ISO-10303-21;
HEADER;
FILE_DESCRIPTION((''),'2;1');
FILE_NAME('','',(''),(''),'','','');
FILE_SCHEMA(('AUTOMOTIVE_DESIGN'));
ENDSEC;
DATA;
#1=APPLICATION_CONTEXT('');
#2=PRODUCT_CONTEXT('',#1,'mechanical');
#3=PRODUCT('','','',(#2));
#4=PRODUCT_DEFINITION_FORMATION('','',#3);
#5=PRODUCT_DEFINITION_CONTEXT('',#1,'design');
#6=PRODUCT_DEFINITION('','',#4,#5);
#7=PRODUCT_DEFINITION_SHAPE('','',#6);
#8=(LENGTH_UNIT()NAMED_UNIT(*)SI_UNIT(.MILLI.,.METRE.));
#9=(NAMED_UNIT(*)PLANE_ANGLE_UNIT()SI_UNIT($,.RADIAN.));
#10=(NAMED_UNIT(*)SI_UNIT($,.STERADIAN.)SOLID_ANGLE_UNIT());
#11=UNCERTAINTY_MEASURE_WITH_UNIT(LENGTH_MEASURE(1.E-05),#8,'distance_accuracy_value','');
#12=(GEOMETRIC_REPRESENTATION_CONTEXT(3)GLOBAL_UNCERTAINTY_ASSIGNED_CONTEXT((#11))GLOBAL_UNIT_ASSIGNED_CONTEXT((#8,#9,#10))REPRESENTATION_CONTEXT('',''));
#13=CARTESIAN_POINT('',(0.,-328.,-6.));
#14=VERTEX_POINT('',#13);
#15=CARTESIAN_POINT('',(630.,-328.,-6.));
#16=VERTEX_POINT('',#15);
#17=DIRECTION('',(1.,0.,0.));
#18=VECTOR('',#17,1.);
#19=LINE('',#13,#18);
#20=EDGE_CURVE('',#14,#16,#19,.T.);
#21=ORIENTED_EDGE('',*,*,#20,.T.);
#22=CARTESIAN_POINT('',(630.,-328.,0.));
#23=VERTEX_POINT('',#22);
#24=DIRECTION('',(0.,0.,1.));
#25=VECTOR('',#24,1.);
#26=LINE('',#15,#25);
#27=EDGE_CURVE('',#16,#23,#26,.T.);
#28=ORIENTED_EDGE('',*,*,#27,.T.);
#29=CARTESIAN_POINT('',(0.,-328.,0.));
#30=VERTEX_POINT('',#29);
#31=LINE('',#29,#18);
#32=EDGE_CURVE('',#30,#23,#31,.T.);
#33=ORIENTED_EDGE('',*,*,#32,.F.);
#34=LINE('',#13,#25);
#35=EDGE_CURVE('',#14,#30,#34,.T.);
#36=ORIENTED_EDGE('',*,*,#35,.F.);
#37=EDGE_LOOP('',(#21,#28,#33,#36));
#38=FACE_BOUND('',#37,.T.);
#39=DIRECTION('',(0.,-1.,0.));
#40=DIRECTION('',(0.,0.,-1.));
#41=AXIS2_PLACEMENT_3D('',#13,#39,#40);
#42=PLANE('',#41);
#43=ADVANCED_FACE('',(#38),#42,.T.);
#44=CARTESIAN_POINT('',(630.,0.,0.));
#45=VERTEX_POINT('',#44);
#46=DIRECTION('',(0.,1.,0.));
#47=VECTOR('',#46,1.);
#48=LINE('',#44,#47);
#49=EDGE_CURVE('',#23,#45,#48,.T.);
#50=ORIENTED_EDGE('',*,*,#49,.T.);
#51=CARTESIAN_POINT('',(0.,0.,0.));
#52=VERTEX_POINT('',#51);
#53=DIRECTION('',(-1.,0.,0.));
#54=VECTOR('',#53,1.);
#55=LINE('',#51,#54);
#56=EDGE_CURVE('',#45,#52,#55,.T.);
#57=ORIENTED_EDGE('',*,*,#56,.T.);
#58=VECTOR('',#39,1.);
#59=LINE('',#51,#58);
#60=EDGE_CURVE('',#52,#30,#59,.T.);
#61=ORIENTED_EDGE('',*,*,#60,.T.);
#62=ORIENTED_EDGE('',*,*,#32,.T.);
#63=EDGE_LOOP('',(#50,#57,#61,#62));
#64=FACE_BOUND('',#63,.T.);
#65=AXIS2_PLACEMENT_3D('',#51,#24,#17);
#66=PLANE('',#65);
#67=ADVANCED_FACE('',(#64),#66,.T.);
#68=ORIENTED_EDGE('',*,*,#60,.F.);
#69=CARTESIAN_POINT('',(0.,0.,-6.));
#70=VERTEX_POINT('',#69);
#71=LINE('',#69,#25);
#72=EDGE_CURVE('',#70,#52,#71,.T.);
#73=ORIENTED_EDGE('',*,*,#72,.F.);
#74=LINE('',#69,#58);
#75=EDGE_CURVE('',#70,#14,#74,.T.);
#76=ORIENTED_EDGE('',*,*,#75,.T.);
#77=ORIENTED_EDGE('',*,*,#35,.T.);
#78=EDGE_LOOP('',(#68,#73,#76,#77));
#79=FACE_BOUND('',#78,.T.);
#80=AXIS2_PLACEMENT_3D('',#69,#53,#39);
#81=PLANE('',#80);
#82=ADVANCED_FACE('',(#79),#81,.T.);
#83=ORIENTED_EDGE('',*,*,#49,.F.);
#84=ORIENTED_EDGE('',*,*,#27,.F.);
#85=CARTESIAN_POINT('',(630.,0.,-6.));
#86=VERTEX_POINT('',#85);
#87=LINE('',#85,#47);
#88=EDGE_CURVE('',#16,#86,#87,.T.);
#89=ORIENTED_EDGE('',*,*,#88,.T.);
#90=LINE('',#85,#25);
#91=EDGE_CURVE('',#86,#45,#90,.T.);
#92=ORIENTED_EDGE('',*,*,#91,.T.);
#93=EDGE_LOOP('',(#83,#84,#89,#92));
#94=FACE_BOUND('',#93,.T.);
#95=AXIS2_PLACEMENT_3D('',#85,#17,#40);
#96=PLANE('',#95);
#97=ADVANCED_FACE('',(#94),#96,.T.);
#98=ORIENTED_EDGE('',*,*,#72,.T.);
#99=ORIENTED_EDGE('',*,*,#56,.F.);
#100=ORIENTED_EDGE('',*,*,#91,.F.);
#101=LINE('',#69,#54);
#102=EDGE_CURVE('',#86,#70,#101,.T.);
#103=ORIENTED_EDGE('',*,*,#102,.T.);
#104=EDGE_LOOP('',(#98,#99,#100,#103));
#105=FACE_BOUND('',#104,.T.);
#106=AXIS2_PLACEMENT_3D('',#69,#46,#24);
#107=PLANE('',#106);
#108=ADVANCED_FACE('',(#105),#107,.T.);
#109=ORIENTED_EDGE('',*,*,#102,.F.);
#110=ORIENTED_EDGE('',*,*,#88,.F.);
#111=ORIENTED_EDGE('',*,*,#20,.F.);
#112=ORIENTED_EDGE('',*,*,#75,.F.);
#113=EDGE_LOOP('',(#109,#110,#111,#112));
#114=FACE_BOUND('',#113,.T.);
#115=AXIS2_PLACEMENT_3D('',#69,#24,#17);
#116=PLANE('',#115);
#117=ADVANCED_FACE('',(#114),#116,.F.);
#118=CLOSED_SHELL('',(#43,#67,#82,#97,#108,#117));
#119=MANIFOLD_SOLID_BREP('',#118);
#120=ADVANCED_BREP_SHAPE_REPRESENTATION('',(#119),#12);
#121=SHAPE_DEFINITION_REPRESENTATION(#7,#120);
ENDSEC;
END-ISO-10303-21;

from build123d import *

# Parameters (mm, degrees)
IZIM1_W            = 630
IZIM1_H            = 328
TABAN_FLAN_1_DEPTH = 6


# Sheet-metal steps are written as plain solids
with BuildPart() as part:
    # Çizim1 → Taban-Flanş1 (new body)
    with BuildSketch(Plane.XY):
        with Locations((315, -164)):
            Rectangle(IZIM1_W, IZIM1_H)
    extrude(amount=-TABAN_FLAN_1_DEPTH)


solid = part.part
